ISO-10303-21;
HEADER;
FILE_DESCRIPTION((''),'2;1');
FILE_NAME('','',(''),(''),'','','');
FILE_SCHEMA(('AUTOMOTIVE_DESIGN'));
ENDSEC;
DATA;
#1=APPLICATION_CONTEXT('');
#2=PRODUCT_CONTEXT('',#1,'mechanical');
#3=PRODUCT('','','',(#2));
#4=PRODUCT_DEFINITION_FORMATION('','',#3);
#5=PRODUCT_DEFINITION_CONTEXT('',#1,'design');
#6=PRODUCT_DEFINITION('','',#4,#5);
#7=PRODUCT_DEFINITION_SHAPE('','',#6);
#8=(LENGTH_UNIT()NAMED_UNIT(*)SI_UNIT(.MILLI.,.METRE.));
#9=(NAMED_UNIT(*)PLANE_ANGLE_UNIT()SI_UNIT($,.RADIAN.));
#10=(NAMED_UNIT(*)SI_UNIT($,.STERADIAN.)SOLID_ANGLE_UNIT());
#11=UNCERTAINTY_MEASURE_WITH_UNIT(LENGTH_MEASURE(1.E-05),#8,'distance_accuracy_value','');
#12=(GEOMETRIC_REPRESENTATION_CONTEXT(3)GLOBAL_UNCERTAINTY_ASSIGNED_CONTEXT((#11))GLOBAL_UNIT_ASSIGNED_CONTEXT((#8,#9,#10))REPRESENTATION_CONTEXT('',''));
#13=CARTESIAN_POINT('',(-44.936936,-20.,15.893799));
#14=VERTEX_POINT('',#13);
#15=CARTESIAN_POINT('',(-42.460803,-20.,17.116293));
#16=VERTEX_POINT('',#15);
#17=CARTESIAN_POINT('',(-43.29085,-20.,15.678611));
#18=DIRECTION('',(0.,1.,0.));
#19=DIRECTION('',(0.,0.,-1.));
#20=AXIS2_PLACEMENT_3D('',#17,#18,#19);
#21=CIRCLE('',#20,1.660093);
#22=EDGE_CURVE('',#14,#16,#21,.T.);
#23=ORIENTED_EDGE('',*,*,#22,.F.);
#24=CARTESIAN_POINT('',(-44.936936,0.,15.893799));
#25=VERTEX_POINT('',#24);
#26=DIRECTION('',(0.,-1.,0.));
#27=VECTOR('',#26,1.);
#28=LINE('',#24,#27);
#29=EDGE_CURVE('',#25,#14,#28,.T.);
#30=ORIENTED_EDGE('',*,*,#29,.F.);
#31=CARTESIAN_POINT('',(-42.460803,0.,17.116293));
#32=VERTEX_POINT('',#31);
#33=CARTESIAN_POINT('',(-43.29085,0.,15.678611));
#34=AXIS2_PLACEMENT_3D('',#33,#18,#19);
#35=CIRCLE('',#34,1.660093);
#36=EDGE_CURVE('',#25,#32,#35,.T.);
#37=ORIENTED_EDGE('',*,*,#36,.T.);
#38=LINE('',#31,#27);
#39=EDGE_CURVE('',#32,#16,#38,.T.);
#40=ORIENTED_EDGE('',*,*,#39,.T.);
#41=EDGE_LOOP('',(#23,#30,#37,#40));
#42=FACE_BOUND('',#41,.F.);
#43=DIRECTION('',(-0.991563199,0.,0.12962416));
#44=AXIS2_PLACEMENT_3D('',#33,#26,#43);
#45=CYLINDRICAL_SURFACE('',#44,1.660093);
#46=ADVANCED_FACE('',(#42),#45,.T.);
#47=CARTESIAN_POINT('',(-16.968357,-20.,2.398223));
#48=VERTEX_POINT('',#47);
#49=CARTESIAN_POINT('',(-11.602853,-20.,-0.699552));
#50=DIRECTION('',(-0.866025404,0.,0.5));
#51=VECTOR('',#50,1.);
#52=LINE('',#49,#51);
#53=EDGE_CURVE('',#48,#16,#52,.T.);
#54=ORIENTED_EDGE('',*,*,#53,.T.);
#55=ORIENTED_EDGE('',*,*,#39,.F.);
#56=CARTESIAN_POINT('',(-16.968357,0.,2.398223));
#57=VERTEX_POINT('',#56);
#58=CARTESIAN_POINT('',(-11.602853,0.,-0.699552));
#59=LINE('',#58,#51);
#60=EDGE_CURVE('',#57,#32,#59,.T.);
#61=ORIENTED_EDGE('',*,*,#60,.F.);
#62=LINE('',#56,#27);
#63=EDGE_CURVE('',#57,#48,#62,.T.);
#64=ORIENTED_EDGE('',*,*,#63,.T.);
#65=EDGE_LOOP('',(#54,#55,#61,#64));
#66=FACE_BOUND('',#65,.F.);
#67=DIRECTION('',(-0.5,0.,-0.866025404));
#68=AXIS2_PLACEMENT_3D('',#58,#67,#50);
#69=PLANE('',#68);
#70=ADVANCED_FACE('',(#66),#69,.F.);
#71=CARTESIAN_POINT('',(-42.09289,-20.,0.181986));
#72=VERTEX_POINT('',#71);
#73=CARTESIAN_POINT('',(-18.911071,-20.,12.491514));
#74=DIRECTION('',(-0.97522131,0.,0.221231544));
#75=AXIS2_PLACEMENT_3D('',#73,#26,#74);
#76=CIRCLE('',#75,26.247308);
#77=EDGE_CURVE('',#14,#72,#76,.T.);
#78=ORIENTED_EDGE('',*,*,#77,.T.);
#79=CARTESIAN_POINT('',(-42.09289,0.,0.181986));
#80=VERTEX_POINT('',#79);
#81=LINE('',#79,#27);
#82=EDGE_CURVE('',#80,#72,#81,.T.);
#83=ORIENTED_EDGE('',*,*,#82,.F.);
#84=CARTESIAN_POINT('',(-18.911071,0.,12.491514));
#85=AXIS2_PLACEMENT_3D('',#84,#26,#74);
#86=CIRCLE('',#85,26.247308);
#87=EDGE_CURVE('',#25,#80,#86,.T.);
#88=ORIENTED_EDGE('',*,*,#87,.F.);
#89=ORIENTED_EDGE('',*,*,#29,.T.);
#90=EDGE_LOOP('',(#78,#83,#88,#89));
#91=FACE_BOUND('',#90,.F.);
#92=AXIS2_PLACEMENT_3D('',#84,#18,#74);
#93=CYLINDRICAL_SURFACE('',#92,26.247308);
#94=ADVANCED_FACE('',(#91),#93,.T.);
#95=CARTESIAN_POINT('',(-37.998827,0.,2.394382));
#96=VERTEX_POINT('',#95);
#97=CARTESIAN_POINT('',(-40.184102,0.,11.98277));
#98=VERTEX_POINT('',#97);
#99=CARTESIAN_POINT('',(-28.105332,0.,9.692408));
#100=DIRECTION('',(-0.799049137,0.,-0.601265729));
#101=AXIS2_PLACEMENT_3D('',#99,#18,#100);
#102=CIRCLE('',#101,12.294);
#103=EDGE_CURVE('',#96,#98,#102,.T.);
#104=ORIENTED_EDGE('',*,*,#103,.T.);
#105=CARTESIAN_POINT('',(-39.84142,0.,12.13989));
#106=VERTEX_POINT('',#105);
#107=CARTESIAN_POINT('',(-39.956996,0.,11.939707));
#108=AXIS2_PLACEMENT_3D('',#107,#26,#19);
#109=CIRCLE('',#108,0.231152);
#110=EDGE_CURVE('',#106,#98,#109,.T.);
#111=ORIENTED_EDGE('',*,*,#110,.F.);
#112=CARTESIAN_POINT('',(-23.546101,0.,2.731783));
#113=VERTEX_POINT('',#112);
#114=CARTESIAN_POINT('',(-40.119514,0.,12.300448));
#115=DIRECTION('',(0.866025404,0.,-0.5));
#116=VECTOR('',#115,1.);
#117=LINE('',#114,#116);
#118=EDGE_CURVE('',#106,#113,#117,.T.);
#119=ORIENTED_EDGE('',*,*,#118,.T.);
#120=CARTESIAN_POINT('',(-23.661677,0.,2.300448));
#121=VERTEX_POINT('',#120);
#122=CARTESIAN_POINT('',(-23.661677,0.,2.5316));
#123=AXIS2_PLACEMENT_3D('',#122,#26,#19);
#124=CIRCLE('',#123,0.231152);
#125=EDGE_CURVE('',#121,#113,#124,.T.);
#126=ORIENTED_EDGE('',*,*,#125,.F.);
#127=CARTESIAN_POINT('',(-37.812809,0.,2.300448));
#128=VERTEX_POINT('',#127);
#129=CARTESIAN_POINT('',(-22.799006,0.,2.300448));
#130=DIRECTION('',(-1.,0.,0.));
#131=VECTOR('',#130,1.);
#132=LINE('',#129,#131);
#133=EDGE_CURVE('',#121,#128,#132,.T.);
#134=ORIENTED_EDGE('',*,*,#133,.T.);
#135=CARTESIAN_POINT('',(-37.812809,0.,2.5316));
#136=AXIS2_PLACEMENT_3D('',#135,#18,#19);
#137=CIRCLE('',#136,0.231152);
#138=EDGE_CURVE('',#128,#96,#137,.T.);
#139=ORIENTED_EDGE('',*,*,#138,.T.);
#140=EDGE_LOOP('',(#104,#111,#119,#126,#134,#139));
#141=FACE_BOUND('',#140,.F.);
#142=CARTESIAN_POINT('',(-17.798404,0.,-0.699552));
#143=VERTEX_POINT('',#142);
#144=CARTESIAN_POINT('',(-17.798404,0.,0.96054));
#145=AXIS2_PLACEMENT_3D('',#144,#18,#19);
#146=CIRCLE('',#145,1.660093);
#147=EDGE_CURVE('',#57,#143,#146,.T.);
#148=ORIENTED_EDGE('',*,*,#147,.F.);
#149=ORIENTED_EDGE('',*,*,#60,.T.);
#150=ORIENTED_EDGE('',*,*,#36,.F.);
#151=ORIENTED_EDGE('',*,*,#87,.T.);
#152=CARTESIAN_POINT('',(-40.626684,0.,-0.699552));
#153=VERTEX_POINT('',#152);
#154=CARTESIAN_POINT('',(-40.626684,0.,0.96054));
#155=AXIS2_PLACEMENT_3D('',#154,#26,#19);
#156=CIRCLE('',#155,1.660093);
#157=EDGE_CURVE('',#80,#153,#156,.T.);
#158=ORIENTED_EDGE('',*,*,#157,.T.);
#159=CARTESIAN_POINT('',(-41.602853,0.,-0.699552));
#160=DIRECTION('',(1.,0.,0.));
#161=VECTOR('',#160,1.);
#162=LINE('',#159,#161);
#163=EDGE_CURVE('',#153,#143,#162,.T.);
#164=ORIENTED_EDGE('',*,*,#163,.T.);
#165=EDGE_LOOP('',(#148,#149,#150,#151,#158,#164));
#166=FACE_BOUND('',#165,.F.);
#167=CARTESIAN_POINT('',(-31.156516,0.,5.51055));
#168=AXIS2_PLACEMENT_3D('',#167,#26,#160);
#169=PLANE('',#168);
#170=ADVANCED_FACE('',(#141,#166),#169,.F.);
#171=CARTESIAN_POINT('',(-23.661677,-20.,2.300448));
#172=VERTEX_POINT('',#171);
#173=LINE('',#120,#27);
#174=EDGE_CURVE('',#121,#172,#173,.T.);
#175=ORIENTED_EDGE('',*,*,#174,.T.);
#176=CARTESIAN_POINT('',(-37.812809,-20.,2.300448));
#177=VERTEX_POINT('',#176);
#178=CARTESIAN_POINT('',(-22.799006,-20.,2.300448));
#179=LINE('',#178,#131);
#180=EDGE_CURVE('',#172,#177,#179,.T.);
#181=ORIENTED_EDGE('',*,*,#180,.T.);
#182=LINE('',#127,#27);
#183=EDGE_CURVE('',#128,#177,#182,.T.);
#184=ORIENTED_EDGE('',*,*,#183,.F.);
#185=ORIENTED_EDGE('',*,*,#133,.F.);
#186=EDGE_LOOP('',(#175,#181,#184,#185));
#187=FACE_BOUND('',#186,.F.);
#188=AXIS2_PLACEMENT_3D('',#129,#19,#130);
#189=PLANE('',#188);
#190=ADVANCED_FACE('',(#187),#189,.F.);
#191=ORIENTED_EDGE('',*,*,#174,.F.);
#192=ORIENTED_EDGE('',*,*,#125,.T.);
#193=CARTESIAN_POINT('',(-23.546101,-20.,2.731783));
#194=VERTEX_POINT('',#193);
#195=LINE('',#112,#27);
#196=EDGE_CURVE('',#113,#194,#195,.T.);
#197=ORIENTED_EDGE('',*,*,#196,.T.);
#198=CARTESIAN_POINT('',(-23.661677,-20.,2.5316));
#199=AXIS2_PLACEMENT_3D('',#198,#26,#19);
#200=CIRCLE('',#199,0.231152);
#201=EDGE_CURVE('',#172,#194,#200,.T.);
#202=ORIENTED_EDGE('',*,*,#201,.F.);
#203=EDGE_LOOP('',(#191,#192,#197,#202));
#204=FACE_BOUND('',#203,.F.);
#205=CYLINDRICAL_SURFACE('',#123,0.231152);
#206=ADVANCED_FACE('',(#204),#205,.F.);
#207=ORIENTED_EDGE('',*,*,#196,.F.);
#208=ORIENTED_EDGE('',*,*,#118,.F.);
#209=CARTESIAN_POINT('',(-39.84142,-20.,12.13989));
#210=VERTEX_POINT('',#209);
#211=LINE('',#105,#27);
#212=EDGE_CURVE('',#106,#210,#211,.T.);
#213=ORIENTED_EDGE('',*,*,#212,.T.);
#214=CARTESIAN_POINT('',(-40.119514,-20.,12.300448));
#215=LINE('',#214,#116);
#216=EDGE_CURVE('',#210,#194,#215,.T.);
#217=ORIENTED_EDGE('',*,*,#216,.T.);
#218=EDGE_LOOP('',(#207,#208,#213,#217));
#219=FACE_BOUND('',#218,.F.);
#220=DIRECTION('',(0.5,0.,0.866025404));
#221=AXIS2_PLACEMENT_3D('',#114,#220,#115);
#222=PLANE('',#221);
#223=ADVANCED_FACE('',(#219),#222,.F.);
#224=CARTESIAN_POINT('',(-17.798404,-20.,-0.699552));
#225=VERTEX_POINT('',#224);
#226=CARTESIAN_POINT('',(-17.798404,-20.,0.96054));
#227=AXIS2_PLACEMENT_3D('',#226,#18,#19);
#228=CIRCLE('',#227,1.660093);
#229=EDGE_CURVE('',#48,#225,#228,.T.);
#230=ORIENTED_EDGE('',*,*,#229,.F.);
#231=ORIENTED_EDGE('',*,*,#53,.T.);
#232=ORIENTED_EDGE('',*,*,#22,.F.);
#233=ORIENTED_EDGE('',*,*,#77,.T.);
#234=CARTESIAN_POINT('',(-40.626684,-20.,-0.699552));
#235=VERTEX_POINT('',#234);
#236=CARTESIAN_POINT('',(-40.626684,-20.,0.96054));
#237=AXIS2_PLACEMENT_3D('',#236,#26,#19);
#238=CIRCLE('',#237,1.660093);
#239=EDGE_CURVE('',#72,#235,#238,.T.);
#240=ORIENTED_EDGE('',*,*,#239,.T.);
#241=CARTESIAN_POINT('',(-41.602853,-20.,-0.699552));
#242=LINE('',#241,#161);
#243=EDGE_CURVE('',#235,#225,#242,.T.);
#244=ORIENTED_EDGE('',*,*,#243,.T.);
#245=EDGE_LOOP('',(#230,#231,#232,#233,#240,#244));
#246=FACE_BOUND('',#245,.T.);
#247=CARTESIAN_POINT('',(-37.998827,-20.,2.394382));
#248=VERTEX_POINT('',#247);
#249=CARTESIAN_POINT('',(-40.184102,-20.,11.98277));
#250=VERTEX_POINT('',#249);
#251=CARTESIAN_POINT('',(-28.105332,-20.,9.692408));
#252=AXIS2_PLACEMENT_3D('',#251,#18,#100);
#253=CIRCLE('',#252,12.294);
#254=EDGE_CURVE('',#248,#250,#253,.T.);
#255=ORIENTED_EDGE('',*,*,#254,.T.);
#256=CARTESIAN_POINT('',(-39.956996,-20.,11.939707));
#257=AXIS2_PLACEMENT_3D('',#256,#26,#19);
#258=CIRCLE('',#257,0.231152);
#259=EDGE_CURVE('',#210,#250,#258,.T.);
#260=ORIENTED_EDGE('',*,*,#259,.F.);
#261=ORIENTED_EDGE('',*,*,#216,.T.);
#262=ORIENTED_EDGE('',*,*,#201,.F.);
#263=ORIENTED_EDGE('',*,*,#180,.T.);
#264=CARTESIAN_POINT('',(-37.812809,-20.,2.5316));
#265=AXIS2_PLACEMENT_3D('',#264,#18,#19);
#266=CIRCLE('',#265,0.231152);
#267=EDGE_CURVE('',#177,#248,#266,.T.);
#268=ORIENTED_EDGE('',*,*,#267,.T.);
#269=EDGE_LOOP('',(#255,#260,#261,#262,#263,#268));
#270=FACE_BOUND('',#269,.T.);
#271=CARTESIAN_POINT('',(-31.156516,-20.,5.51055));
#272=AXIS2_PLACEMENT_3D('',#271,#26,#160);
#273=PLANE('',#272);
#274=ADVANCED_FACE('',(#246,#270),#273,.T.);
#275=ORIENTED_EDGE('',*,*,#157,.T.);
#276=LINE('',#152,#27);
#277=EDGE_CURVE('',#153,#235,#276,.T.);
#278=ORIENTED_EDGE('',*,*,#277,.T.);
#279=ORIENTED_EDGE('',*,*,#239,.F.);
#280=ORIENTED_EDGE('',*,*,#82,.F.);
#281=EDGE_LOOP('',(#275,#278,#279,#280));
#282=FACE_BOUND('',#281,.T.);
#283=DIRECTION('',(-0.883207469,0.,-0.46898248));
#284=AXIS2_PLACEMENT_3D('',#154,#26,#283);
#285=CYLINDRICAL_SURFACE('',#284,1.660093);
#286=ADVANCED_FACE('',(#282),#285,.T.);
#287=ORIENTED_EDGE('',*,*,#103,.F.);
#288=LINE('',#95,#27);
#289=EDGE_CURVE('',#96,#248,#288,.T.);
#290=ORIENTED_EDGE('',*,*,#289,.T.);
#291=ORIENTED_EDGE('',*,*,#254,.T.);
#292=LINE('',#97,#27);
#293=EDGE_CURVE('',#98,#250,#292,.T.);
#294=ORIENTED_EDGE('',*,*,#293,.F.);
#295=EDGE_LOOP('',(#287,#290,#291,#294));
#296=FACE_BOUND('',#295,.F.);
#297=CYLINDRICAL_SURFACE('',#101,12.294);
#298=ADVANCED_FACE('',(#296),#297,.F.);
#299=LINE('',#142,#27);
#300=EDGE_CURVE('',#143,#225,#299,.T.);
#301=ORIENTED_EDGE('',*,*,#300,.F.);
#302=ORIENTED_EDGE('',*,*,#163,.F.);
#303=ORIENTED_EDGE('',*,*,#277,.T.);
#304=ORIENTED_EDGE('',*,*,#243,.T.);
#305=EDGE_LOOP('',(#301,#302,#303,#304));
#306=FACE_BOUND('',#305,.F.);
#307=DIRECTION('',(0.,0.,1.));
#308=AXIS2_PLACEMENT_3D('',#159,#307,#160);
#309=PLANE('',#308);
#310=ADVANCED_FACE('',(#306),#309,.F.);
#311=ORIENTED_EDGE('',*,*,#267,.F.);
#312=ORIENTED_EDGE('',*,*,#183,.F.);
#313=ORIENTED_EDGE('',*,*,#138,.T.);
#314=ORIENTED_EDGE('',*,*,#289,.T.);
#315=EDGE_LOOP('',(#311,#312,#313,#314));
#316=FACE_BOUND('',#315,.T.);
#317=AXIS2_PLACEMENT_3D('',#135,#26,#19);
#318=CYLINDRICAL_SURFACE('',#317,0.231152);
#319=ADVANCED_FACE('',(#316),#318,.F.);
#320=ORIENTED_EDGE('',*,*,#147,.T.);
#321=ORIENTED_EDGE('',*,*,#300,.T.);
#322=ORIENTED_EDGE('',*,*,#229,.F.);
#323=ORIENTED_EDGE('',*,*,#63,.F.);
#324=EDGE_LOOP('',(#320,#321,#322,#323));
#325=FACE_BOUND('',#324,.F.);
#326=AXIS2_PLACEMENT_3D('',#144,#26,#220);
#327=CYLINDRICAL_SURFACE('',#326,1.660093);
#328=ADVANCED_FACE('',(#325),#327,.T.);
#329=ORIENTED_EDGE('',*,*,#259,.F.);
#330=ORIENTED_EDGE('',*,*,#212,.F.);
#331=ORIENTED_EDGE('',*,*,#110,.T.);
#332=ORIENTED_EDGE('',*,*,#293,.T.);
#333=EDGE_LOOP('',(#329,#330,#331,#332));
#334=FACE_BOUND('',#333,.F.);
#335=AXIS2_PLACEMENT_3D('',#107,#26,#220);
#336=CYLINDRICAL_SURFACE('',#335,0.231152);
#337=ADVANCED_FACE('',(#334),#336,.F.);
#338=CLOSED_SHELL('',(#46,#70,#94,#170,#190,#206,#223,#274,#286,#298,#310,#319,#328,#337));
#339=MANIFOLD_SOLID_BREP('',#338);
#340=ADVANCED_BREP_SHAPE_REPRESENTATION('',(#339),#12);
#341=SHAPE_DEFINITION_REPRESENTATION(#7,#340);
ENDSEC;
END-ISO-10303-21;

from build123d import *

# Parameters (mm, degrees)
F1_DEPTH = 20
F2_R     = 1.6600926706
F3_R     = 0.231152144


with BuildPart() as f1:
    # F0 (on Front) → F1 (new body)
    with BuildSketch(Plane.XZ):
        with BuildLine():
            ThreePointArc((-44.5080057804, 18.2982461622), (-44.856766986, 8.5238854869), (-41.6028533709, -0.6995524392))
            Line((-41.6028533709, -0.6995524392), (-11.6028533709, -0.6995524392))
            Line((-11.6028533709, -0.6995524392), (-44.5080057804, 18.2982461622))
        make_face()
        with BuildLine():
            ThreePointArc((-37.9288420081, 2.3004475608), (-40.1145449825, 7.0615839207), (-40.1195138693, 12.3004475608))
            Line((-40.1195138693, 12.3004475608), (-22.7990057936, 2.3004475608))
            Line((-22.7990057936, 2.3004475608), (-37.9288420081, 2.3004475608))
        make_face(mode=Mode.SUBTRACT)
    extrude(amount=F1_DEPTH)

    # F2
    f2_edges = [f1.edges().sort_by_distance(p)[0] for p in [
        (-11.602853, -10, -0.699552),
        (-44.508006, -10, 18.298246),
        (-41.602853, -10, -0.699552),
    ]]
    fillet(f2_edges, radius=F2_R)

    # F3
    f3_edges = [f1.edges().sort_by_distance(p)[0] for p in [
        (-22.799006, -10, 2.300448),
        (-37.928842, -10, 2.300448),
        (-40.119514, -10, 12.300448),
    ]]
    fillet(f3_edges, radius=F3_R)


solid = f1.part
